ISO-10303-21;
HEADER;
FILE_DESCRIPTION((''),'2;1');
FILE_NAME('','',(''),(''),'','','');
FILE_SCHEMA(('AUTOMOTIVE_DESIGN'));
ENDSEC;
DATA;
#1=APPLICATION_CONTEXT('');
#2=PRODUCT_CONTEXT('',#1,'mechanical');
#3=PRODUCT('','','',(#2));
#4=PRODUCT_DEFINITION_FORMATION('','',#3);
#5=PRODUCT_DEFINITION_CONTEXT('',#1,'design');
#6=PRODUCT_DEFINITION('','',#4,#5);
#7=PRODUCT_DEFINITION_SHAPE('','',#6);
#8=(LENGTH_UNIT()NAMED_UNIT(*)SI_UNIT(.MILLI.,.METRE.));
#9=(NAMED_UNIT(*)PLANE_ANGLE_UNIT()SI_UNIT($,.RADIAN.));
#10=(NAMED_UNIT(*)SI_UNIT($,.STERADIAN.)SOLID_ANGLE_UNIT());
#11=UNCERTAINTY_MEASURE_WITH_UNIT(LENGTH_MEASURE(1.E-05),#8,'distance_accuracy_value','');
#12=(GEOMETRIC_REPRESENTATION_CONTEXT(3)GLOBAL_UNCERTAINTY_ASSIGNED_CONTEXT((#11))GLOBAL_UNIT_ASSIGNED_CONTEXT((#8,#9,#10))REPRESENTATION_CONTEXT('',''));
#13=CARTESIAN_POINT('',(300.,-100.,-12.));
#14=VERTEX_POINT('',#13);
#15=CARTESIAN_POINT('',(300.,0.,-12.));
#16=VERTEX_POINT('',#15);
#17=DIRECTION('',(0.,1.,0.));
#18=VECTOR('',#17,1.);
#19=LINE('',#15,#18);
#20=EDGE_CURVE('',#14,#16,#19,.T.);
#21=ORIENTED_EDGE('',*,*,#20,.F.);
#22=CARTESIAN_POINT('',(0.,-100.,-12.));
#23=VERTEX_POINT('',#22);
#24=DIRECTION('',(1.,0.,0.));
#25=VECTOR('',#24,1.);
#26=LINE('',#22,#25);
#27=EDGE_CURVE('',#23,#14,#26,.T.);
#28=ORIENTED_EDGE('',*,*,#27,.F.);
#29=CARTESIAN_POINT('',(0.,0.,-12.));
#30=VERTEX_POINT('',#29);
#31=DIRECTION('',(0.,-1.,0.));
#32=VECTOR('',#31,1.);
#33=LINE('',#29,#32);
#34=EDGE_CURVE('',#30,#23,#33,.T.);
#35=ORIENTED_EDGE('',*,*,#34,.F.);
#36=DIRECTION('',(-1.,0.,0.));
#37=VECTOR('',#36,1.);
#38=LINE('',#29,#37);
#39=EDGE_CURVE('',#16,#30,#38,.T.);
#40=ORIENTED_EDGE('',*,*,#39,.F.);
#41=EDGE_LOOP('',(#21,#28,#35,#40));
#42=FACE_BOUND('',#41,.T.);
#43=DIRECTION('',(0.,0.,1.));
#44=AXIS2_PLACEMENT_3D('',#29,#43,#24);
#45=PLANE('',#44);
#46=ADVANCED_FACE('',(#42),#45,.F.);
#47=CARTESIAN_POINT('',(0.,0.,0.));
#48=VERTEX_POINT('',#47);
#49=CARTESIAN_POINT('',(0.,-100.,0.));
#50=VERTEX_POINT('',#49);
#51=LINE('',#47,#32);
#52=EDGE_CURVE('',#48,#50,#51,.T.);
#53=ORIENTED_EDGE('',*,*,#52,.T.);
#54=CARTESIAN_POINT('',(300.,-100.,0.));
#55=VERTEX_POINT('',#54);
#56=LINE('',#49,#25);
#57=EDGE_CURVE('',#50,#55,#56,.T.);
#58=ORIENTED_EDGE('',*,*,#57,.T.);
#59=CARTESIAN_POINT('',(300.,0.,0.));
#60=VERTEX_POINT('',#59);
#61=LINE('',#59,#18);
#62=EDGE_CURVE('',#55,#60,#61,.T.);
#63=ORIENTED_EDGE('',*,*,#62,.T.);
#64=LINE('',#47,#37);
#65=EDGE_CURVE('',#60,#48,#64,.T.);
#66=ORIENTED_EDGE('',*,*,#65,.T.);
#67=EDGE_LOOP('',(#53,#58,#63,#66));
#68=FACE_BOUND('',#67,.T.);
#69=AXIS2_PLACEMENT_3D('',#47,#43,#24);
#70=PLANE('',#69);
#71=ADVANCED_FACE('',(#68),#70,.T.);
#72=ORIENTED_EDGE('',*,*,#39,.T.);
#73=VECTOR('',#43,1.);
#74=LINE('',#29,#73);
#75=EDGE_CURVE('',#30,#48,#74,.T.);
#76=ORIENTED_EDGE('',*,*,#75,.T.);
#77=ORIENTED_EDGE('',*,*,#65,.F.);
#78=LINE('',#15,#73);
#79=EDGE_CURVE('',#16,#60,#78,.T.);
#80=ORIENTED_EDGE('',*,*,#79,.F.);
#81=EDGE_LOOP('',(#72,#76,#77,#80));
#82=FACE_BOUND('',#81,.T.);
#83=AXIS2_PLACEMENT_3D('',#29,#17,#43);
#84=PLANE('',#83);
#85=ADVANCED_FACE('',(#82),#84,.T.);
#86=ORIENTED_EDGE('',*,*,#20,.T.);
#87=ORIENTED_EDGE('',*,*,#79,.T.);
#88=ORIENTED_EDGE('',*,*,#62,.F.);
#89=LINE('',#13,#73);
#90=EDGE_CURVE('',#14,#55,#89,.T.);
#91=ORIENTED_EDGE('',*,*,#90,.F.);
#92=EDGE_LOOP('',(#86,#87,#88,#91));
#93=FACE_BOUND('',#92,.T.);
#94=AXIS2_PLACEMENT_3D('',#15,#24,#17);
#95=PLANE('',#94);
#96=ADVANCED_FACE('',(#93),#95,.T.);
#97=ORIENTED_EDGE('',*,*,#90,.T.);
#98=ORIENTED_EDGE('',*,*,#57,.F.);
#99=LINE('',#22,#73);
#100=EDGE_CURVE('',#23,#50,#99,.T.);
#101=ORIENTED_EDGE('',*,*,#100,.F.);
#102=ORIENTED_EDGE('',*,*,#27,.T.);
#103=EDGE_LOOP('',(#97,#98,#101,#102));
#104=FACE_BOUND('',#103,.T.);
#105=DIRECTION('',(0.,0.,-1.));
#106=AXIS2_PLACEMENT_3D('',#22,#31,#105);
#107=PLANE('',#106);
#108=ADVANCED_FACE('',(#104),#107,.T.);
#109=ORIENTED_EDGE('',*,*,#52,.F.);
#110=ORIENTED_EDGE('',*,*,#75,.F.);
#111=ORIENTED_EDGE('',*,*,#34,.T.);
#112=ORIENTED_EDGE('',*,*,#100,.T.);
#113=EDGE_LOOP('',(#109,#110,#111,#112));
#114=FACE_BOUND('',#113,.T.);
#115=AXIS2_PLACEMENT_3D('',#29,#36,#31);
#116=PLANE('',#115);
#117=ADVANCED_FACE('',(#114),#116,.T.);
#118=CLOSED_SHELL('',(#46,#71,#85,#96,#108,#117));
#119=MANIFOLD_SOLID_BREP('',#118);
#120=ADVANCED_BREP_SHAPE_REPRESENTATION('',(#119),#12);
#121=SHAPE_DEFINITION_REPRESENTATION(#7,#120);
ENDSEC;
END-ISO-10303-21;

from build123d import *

# Parameters (mm, degrees)
IZIM1_W            = 300
IZIM1_H            = 100
TABAN_FLAN_1_DEPTH = 12


# Sheet-metal steps are written as plain solids
with BuildPart() as part:
    # Çizim1 → Taban-Flanş1 (new body)
    with BuildSketch(Plane.XY):
        with Locations((150, -50)):
            Rectangle(IZIM1_W, IZIM1_H)
    extrude(amount=-TABAN_FLAN_1_DEPTH)


solid = part.part
